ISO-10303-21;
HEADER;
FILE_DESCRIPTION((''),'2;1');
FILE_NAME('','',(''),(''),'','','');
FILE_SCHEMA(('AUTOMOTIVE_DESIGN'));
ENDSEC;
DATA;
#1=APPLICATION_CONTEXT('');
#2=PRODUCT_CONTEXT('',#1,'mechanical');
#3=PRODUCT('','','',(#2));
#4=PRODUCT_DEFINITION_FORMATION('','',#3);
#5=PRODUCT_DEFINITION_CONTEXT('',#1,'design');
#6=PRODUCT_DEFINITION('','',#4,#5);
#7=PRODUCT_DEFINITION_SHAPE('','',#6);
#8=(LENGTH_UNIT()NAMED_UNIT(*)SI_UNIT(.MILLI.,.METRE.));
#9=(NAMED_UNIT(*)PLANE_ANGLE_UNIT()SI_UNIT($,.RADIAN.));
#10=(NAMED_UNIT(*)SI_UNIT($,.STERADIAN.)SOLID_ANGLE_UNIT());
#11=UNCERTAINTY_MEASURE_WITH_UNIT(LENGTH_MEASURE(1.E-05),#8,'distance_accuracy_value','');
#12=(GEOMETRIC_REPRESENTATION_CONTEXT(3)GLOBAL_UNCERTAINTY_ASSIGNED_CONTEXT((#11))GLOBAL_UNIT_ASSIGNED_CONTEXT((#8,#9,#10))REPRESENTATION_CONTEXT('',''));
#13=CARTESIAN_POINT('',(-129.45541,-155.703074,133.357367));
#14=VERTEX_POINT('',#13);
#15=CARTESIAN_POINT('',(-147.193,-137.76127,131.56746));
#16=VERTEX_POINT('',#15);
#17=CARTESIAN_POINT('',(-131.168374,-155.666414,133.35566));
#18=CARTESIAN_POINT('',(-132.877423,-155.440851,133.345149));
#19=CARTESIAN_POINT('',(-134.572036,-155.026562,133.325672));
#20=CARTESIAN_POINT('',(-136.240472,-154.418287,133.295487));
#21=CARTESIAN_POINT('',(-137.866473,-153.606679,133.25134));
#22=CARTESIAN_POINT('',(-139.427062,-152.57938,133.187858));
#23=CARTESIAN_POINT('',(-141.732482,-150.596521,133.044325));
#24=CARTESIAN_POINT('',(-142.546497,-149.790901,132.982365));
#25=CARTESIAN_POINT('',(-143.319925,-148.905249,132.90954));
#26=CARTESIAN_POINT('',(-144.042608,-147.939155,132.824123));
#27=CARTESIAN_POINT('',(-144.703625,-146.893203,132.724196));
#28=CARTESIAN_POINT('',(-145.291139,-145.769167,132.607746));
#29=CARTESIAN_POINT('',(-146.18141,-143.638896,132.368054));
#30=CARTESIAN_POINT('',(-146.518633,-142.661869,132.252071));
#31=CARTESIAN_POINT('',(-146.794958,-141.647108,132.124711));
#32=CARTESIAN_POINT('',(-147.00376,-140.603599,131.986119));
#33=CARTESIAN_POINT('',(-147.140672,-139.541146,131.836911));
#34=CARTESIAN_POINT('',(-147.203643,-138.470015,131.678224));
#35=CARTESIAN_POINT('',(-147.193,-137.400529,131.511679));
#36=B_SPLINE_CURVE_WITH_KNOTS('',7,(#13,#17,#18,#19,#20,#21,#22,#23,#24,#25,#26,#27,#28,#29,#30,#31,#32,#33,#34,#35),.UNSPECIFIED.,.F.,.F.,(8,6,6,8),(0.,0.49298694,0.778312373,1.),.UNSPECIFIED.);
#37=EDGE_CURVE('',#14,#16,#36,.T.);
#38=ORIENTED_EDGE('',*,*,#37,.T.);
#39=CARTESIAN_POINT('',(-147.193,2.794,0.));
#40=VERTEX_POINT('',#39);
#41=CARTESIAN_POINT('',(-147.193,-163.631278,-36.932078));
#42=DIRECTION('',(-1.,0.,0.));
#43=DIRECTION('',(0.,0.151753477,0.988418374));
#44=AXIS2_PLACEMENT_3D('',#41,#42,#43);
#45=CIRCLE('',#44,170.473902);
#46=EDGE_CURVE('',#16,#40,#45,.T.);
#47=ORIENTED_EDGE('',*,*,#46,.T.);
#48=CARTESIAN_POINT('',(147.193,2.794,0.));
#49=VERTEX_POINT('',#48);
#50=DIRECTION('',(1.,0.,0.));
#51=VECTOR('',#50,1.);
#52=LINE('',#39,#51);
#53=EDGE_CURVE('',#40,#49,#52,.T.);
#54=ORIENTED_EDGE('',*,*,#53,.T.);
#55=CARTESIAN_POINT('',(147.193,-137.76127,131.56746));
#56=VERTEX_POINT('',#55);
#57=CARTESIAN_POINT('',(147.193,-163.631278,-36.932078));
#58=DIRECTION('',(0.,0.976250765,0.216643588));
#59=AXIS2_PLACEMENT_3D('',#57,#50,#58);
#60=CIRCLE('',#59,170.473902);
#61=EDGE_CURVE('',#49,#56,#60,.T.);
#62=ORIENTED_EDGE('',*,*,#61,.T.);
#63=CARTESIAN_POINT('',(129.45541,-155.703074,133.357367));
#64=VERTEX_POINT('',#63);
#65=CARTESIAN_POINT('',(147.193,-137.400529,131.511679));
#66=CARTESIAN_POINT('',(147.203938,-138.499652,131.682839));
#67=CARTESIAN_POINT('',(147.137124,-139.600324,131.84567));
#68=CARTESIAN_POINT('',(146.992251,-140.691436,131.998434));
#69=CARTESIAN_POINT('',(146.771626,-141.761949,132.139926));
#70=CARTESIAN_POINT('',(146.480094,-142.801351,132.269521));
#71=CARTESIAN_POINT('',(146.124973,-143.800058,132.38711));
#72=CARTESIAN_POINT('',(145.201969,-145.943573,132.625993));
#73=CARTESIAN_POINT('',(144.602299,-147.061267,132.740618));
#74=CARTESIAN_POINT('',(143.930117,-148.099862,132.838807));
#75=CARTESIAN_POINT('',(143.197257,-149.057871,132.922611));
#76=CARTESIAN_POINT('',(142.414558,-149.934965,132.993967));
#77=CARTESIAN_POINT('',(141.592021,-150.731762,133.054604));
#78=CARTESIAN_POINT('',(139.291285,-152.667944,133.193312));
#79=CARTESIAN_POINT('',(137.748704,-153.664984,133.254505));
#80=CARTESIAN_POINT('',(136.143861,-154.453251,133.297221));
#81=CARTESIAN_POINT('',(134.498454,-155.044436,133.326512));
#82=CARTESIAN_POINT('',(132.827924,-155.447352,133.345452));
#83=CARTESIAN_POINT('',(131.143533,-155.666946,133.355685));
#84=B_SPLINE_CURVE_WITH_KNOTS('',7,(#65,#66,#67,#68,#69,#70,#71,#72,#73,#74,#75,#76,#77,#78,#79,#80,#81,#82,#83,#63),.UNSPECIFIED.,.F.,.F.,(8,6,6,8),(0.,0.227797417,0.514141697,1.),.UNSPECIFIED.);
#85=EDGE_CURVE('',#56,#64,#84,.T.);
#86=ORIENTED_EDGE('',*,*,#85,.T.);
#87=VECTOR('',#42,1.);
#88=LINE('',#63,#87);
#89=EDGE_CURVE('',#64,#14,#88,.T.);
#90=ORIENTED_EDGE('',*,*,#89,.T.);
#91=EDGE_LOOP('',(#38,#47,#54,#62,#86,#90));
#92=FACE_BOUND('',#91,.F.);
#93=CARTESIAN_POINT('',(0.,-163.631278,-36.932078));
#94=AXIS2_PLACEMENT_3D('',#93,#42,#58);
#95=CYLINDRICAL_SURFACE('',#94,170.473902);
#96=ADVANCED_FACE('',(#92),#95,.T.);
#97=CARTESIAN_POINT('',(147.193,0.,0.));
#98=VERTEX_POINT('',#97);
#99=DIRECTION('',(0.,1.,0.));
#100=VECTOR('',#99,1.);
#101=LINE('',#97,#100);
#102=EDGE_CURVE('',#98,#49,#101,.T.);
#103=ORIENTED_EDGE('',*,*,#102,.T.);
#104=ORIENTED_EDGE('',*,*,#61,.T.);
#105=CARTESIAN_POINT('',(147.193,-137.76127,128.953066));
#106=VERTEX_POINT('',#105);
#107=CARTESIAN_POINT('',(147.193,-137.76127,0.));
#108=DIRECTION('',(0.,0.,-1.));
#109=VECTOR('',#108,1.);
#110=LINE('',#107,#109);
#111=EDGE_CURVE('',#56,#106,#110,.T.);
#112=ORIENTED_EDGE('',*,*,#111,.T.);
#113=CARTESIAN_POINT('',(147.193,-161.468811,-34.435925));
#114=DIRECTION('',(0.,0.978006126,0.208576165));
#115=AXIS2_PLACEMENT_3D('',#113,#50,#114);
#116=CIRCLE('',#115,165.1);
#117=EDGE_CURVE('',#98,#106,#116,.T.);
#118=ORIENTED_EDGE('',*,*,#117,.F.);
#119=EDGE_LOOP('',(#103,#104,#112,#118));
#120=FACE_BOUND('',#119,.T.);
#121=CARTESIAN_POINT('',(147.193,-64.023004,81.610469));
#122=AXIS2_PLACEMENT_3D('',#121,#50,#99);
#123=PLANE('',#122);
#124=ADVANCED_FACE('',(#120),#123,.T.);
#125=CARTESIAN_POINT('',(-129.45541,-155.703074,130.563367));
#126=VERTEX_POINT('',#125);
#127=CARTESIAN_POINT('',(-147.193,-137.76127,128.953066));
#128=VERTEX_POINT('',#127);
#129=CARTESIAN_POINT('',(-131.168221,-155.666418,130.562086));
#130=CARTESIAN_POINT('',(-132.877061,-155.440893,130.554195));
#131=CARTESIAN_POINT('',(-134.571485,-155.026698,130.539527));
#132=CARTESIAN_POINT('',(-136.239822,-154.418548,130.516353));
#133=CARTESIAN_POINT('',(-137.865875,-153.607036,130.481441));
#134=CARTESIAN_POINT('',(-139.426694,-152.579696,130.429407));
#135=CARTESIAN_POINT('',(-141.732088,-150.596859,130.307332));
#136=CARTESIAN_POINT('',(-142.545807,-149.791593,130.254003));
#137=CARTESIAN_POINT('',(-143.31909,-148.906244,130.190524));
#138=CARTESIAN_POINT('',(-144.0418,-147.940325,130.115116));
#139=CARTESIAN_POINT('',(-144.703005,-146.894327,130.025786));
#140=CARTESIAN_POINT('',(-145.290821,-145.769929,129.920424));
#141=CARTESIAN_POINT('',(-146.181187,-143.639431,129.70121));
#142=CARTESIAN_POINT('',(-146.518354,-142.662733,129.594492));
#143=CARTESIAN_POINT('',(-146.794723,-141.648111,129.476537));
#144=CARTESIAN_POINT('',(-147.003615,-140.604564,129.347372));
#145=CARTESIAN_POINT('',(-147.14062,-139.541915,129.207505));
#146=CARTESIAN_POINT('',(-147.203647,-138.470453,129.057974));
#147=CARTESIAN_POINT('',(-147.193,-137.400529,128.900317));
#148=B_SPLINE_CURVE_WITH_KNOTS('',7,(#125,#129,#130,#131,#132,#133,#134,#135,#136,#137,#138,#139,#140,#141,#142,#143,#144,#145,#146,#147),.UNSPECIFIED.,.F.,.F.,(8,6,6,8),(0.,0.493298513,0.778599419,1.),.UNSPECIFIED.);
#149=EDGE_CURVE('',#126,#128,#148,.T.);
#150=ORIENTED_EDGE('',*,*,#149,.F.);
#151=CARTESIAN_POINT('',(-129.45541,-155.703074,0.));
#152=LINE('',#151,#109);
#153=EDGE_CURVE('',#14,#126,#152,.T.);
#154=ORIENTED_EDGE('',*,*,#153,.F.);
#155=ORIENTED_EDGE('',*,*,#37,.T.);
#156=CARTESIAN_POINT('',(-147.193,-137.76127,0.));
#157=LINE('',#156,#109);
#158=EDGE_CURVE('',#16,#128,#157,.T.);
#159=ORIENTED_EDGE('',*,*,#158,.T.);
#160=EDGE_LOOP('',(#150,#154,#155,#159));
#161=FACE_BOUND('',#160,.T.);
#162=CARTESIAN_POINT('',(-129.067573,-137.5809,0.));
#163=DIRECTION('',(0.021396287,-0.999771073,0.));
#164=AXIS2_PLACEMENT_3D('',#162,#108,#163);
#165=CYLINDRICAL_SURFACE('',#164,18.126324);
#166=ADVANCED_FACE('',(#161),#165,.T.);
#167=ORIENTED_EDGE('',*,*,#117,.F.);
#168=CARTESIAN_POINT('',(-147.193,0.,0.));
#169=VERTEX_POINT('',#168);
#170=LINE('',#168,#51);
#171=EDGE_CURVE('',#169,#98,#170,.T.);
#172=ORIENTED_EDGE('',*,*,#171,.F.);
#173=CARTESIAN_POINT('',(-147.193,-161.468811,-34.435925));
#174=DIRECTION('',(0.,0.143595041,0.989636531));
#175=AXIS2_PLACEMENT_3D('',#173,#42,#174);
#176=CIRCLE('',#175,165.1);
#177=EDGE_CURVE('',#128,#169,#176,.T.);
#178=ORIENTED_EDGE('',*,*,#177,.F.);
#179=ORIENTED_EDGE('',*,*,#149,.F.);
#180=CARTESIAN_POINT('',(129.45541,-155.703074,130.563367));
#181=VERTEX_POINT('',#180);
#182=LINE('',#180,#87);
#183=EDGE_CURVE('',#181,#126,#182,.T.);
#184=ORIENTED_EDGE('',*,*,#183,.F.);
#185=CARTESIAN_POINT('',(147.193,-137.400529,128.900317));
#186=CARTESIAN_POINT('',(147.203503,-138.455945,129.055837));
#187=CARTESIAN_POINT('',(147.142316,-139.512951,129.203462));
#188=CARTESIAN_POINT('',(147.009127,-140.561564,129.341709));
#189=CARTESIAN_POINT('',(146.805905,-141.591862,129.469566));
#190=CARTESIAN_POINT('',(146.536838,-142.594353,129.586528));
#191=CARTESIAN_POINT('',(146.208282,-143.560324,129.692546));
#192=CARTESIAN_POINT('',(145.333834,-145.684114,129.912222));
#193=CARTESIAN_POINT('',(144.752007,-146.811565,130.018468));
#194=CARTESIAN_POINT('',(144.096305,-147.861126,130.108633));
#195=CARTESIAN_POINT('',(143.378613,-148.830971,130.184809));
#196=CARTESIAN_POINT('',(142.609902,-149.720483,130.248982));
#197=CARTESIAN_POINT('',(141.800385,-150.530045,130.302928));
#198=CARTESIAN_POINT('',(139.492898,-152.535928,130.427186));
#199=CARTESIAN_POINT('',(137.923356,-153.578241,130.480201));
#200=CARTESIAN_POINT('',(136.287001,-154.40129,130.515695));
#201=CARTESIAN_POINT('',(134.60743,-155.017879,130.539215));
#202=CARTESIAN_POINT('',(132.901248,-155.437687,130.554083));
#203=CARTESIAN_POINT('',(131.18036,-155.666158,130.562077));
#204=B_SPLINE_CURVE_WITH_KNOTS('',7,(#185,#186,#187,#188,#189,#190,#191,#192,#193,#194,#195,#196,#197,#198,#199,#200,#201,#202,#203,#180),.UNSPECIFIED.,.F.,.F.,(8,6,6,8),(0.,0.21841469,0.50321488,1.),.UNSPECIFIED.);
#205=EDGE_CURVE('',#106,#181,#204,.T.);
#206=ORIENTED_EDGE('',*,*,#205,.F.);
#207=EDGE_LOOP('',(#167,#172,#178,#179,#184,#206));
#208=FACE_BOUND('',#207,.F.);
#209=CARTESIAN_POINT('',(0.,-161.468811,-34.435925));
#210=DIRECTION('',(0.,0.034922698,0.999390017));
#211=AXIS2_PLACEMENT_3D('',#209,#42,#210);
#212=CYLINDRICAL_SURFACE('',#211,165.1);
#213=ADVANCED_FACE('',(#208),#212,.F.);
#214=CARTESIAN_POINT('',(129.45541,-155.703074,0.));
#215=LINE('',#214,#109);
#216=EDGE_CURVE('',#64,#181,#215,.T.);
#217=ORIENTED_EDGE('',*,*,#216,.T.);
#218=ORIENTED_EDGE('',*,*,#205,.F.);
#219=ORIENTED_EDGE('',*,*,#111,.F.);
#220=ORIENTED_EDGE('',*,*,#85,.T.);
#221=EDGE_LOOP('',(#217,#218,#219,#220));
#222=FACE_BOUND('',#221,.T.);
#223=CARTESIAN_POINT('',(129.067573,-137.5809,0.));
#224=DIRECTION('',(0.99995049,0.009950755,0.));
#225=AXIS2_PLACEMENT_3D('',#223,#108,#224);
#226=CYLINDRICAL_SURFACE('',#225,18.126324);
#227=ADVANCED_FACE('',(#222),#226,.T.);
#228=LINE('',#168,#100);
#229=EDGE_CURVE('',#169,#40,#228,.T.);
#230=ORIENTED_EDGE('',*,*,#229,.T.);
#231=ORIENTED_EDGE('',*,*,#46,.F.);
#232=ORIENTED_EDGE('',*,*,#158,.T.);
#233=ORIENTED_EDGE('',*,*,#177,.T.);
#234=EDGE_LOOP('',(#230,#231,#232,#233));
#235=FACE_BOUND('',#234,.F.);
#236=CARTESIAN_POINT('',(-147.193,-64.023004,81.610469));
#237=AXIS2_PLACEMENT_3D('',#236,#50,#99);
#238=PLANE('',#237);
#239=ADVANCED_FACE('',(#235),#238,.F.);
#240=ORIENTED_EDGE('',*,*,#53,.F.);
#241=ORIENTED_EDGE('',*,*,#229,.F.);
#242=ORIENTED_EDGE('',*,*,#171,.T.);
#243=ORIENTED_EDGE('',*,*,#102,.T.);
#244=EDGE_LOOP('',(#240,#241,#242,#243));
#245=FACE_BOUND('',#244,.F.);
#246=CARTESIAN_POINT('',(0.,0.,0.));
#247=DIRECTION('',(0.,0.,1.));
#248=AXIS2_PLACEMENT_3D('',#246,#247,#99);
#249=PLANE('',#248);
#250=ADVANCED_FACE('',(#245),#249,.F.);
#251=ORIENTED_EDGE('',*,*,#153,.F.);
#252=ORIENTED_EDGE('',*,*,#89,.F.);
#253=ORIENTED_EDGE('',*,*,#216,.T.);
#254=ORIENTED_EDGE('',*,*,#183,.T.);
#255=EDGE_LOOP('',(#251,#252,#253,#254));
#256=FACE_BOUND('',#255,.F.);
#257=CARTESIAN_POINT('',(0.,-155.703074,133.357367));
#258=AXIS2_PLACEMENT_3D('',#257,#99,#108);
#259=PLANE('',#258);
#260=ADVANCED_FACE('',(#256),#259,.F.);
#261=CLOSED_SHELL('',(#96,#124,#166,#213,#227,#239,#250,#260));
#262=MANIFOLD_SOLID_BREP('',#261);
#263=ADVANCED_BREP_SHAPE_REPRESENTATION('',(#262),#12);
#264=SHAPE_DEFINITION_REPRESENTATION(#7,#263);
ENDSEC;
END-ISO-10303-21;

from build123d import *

# Parameters (mm, degrees)
F1_DEPTH      = 147.193
F1_DEPTH_BACK = 147.193
F3_DEPTH      = 186.182


# Not quite as in the source:
# - a length typed as a fraction of an inch, garbled in the dataset ("3 / 203.2 mm" for 3/8 in), is restored


with BuildPart() as f1:
    # F0 (on Right) → F1 (new body, two sides)
    with BuildSketch(Plane.YZ) as f1_sk:
        with BuildLine():
            ThreePointArc((-155.7030739649, 130.5633668295), (-55.3860759172, 92.0728226971), (0, 0))
            Line((0, 0), (2.794, 0))
            ThreePointArc((2.794, 0), (-53.8777768496, 93.5114749264), (-155.7030739649, 133.3573668295))
            Line((-155.7030739649, 133.3573668295), (-155.7030739649, 130.5633668295))
        make_face()
    extrude(amount=-F1_DEPTH)
    extrude(f1_sk.sketch, amount=F1_DEPTH_BACK)

    # F2 (on Top) → F3 (cut)
    with BuildSketch(Plane.XY):
        with BuildLine():
            ThreePointArc((-128.6797374487, -155.7030739649), (-141.8112510122, -150.4712953815), (-147.193, -137.4005290135))
            Line((-147.193, -137.4005290135), (-161.3427400589, -137.4005290135))
            Line((-161.3427400589, -137.4005290135), (-161.3427400589, -161.3346251115))
            Line((-161.3427400589, -161.3346251115), (-129.2428970337, -161.3346251115))
            Line((-129.2428970337, -161.3346251115), (-128.6797374487, -155.7030739649))
        make_face()
        with BuildLine():
            Line((128.6797374487, -155.7030739649), (129.2428970337, -161.3346251115))
            Line((129.2428970337, -161.3346251115), (161.3427400589, -161.3346251115))
            Line((161.3427400589, -161.3346251115), (161.3427400589, -137.4005290135))
            Line((161.3427400589, -137.4005290135), (147.193, -137.4005290135))
            ThreePointArc((147.193, -137.4005290135), (141.8112510122, -150.4712953815), (128.6797374487, -155.7030739649))
        make_face()
    extrude(amount=F3_DEPTH, mode=Mode.SUBTRACT)


solid = f1.part
